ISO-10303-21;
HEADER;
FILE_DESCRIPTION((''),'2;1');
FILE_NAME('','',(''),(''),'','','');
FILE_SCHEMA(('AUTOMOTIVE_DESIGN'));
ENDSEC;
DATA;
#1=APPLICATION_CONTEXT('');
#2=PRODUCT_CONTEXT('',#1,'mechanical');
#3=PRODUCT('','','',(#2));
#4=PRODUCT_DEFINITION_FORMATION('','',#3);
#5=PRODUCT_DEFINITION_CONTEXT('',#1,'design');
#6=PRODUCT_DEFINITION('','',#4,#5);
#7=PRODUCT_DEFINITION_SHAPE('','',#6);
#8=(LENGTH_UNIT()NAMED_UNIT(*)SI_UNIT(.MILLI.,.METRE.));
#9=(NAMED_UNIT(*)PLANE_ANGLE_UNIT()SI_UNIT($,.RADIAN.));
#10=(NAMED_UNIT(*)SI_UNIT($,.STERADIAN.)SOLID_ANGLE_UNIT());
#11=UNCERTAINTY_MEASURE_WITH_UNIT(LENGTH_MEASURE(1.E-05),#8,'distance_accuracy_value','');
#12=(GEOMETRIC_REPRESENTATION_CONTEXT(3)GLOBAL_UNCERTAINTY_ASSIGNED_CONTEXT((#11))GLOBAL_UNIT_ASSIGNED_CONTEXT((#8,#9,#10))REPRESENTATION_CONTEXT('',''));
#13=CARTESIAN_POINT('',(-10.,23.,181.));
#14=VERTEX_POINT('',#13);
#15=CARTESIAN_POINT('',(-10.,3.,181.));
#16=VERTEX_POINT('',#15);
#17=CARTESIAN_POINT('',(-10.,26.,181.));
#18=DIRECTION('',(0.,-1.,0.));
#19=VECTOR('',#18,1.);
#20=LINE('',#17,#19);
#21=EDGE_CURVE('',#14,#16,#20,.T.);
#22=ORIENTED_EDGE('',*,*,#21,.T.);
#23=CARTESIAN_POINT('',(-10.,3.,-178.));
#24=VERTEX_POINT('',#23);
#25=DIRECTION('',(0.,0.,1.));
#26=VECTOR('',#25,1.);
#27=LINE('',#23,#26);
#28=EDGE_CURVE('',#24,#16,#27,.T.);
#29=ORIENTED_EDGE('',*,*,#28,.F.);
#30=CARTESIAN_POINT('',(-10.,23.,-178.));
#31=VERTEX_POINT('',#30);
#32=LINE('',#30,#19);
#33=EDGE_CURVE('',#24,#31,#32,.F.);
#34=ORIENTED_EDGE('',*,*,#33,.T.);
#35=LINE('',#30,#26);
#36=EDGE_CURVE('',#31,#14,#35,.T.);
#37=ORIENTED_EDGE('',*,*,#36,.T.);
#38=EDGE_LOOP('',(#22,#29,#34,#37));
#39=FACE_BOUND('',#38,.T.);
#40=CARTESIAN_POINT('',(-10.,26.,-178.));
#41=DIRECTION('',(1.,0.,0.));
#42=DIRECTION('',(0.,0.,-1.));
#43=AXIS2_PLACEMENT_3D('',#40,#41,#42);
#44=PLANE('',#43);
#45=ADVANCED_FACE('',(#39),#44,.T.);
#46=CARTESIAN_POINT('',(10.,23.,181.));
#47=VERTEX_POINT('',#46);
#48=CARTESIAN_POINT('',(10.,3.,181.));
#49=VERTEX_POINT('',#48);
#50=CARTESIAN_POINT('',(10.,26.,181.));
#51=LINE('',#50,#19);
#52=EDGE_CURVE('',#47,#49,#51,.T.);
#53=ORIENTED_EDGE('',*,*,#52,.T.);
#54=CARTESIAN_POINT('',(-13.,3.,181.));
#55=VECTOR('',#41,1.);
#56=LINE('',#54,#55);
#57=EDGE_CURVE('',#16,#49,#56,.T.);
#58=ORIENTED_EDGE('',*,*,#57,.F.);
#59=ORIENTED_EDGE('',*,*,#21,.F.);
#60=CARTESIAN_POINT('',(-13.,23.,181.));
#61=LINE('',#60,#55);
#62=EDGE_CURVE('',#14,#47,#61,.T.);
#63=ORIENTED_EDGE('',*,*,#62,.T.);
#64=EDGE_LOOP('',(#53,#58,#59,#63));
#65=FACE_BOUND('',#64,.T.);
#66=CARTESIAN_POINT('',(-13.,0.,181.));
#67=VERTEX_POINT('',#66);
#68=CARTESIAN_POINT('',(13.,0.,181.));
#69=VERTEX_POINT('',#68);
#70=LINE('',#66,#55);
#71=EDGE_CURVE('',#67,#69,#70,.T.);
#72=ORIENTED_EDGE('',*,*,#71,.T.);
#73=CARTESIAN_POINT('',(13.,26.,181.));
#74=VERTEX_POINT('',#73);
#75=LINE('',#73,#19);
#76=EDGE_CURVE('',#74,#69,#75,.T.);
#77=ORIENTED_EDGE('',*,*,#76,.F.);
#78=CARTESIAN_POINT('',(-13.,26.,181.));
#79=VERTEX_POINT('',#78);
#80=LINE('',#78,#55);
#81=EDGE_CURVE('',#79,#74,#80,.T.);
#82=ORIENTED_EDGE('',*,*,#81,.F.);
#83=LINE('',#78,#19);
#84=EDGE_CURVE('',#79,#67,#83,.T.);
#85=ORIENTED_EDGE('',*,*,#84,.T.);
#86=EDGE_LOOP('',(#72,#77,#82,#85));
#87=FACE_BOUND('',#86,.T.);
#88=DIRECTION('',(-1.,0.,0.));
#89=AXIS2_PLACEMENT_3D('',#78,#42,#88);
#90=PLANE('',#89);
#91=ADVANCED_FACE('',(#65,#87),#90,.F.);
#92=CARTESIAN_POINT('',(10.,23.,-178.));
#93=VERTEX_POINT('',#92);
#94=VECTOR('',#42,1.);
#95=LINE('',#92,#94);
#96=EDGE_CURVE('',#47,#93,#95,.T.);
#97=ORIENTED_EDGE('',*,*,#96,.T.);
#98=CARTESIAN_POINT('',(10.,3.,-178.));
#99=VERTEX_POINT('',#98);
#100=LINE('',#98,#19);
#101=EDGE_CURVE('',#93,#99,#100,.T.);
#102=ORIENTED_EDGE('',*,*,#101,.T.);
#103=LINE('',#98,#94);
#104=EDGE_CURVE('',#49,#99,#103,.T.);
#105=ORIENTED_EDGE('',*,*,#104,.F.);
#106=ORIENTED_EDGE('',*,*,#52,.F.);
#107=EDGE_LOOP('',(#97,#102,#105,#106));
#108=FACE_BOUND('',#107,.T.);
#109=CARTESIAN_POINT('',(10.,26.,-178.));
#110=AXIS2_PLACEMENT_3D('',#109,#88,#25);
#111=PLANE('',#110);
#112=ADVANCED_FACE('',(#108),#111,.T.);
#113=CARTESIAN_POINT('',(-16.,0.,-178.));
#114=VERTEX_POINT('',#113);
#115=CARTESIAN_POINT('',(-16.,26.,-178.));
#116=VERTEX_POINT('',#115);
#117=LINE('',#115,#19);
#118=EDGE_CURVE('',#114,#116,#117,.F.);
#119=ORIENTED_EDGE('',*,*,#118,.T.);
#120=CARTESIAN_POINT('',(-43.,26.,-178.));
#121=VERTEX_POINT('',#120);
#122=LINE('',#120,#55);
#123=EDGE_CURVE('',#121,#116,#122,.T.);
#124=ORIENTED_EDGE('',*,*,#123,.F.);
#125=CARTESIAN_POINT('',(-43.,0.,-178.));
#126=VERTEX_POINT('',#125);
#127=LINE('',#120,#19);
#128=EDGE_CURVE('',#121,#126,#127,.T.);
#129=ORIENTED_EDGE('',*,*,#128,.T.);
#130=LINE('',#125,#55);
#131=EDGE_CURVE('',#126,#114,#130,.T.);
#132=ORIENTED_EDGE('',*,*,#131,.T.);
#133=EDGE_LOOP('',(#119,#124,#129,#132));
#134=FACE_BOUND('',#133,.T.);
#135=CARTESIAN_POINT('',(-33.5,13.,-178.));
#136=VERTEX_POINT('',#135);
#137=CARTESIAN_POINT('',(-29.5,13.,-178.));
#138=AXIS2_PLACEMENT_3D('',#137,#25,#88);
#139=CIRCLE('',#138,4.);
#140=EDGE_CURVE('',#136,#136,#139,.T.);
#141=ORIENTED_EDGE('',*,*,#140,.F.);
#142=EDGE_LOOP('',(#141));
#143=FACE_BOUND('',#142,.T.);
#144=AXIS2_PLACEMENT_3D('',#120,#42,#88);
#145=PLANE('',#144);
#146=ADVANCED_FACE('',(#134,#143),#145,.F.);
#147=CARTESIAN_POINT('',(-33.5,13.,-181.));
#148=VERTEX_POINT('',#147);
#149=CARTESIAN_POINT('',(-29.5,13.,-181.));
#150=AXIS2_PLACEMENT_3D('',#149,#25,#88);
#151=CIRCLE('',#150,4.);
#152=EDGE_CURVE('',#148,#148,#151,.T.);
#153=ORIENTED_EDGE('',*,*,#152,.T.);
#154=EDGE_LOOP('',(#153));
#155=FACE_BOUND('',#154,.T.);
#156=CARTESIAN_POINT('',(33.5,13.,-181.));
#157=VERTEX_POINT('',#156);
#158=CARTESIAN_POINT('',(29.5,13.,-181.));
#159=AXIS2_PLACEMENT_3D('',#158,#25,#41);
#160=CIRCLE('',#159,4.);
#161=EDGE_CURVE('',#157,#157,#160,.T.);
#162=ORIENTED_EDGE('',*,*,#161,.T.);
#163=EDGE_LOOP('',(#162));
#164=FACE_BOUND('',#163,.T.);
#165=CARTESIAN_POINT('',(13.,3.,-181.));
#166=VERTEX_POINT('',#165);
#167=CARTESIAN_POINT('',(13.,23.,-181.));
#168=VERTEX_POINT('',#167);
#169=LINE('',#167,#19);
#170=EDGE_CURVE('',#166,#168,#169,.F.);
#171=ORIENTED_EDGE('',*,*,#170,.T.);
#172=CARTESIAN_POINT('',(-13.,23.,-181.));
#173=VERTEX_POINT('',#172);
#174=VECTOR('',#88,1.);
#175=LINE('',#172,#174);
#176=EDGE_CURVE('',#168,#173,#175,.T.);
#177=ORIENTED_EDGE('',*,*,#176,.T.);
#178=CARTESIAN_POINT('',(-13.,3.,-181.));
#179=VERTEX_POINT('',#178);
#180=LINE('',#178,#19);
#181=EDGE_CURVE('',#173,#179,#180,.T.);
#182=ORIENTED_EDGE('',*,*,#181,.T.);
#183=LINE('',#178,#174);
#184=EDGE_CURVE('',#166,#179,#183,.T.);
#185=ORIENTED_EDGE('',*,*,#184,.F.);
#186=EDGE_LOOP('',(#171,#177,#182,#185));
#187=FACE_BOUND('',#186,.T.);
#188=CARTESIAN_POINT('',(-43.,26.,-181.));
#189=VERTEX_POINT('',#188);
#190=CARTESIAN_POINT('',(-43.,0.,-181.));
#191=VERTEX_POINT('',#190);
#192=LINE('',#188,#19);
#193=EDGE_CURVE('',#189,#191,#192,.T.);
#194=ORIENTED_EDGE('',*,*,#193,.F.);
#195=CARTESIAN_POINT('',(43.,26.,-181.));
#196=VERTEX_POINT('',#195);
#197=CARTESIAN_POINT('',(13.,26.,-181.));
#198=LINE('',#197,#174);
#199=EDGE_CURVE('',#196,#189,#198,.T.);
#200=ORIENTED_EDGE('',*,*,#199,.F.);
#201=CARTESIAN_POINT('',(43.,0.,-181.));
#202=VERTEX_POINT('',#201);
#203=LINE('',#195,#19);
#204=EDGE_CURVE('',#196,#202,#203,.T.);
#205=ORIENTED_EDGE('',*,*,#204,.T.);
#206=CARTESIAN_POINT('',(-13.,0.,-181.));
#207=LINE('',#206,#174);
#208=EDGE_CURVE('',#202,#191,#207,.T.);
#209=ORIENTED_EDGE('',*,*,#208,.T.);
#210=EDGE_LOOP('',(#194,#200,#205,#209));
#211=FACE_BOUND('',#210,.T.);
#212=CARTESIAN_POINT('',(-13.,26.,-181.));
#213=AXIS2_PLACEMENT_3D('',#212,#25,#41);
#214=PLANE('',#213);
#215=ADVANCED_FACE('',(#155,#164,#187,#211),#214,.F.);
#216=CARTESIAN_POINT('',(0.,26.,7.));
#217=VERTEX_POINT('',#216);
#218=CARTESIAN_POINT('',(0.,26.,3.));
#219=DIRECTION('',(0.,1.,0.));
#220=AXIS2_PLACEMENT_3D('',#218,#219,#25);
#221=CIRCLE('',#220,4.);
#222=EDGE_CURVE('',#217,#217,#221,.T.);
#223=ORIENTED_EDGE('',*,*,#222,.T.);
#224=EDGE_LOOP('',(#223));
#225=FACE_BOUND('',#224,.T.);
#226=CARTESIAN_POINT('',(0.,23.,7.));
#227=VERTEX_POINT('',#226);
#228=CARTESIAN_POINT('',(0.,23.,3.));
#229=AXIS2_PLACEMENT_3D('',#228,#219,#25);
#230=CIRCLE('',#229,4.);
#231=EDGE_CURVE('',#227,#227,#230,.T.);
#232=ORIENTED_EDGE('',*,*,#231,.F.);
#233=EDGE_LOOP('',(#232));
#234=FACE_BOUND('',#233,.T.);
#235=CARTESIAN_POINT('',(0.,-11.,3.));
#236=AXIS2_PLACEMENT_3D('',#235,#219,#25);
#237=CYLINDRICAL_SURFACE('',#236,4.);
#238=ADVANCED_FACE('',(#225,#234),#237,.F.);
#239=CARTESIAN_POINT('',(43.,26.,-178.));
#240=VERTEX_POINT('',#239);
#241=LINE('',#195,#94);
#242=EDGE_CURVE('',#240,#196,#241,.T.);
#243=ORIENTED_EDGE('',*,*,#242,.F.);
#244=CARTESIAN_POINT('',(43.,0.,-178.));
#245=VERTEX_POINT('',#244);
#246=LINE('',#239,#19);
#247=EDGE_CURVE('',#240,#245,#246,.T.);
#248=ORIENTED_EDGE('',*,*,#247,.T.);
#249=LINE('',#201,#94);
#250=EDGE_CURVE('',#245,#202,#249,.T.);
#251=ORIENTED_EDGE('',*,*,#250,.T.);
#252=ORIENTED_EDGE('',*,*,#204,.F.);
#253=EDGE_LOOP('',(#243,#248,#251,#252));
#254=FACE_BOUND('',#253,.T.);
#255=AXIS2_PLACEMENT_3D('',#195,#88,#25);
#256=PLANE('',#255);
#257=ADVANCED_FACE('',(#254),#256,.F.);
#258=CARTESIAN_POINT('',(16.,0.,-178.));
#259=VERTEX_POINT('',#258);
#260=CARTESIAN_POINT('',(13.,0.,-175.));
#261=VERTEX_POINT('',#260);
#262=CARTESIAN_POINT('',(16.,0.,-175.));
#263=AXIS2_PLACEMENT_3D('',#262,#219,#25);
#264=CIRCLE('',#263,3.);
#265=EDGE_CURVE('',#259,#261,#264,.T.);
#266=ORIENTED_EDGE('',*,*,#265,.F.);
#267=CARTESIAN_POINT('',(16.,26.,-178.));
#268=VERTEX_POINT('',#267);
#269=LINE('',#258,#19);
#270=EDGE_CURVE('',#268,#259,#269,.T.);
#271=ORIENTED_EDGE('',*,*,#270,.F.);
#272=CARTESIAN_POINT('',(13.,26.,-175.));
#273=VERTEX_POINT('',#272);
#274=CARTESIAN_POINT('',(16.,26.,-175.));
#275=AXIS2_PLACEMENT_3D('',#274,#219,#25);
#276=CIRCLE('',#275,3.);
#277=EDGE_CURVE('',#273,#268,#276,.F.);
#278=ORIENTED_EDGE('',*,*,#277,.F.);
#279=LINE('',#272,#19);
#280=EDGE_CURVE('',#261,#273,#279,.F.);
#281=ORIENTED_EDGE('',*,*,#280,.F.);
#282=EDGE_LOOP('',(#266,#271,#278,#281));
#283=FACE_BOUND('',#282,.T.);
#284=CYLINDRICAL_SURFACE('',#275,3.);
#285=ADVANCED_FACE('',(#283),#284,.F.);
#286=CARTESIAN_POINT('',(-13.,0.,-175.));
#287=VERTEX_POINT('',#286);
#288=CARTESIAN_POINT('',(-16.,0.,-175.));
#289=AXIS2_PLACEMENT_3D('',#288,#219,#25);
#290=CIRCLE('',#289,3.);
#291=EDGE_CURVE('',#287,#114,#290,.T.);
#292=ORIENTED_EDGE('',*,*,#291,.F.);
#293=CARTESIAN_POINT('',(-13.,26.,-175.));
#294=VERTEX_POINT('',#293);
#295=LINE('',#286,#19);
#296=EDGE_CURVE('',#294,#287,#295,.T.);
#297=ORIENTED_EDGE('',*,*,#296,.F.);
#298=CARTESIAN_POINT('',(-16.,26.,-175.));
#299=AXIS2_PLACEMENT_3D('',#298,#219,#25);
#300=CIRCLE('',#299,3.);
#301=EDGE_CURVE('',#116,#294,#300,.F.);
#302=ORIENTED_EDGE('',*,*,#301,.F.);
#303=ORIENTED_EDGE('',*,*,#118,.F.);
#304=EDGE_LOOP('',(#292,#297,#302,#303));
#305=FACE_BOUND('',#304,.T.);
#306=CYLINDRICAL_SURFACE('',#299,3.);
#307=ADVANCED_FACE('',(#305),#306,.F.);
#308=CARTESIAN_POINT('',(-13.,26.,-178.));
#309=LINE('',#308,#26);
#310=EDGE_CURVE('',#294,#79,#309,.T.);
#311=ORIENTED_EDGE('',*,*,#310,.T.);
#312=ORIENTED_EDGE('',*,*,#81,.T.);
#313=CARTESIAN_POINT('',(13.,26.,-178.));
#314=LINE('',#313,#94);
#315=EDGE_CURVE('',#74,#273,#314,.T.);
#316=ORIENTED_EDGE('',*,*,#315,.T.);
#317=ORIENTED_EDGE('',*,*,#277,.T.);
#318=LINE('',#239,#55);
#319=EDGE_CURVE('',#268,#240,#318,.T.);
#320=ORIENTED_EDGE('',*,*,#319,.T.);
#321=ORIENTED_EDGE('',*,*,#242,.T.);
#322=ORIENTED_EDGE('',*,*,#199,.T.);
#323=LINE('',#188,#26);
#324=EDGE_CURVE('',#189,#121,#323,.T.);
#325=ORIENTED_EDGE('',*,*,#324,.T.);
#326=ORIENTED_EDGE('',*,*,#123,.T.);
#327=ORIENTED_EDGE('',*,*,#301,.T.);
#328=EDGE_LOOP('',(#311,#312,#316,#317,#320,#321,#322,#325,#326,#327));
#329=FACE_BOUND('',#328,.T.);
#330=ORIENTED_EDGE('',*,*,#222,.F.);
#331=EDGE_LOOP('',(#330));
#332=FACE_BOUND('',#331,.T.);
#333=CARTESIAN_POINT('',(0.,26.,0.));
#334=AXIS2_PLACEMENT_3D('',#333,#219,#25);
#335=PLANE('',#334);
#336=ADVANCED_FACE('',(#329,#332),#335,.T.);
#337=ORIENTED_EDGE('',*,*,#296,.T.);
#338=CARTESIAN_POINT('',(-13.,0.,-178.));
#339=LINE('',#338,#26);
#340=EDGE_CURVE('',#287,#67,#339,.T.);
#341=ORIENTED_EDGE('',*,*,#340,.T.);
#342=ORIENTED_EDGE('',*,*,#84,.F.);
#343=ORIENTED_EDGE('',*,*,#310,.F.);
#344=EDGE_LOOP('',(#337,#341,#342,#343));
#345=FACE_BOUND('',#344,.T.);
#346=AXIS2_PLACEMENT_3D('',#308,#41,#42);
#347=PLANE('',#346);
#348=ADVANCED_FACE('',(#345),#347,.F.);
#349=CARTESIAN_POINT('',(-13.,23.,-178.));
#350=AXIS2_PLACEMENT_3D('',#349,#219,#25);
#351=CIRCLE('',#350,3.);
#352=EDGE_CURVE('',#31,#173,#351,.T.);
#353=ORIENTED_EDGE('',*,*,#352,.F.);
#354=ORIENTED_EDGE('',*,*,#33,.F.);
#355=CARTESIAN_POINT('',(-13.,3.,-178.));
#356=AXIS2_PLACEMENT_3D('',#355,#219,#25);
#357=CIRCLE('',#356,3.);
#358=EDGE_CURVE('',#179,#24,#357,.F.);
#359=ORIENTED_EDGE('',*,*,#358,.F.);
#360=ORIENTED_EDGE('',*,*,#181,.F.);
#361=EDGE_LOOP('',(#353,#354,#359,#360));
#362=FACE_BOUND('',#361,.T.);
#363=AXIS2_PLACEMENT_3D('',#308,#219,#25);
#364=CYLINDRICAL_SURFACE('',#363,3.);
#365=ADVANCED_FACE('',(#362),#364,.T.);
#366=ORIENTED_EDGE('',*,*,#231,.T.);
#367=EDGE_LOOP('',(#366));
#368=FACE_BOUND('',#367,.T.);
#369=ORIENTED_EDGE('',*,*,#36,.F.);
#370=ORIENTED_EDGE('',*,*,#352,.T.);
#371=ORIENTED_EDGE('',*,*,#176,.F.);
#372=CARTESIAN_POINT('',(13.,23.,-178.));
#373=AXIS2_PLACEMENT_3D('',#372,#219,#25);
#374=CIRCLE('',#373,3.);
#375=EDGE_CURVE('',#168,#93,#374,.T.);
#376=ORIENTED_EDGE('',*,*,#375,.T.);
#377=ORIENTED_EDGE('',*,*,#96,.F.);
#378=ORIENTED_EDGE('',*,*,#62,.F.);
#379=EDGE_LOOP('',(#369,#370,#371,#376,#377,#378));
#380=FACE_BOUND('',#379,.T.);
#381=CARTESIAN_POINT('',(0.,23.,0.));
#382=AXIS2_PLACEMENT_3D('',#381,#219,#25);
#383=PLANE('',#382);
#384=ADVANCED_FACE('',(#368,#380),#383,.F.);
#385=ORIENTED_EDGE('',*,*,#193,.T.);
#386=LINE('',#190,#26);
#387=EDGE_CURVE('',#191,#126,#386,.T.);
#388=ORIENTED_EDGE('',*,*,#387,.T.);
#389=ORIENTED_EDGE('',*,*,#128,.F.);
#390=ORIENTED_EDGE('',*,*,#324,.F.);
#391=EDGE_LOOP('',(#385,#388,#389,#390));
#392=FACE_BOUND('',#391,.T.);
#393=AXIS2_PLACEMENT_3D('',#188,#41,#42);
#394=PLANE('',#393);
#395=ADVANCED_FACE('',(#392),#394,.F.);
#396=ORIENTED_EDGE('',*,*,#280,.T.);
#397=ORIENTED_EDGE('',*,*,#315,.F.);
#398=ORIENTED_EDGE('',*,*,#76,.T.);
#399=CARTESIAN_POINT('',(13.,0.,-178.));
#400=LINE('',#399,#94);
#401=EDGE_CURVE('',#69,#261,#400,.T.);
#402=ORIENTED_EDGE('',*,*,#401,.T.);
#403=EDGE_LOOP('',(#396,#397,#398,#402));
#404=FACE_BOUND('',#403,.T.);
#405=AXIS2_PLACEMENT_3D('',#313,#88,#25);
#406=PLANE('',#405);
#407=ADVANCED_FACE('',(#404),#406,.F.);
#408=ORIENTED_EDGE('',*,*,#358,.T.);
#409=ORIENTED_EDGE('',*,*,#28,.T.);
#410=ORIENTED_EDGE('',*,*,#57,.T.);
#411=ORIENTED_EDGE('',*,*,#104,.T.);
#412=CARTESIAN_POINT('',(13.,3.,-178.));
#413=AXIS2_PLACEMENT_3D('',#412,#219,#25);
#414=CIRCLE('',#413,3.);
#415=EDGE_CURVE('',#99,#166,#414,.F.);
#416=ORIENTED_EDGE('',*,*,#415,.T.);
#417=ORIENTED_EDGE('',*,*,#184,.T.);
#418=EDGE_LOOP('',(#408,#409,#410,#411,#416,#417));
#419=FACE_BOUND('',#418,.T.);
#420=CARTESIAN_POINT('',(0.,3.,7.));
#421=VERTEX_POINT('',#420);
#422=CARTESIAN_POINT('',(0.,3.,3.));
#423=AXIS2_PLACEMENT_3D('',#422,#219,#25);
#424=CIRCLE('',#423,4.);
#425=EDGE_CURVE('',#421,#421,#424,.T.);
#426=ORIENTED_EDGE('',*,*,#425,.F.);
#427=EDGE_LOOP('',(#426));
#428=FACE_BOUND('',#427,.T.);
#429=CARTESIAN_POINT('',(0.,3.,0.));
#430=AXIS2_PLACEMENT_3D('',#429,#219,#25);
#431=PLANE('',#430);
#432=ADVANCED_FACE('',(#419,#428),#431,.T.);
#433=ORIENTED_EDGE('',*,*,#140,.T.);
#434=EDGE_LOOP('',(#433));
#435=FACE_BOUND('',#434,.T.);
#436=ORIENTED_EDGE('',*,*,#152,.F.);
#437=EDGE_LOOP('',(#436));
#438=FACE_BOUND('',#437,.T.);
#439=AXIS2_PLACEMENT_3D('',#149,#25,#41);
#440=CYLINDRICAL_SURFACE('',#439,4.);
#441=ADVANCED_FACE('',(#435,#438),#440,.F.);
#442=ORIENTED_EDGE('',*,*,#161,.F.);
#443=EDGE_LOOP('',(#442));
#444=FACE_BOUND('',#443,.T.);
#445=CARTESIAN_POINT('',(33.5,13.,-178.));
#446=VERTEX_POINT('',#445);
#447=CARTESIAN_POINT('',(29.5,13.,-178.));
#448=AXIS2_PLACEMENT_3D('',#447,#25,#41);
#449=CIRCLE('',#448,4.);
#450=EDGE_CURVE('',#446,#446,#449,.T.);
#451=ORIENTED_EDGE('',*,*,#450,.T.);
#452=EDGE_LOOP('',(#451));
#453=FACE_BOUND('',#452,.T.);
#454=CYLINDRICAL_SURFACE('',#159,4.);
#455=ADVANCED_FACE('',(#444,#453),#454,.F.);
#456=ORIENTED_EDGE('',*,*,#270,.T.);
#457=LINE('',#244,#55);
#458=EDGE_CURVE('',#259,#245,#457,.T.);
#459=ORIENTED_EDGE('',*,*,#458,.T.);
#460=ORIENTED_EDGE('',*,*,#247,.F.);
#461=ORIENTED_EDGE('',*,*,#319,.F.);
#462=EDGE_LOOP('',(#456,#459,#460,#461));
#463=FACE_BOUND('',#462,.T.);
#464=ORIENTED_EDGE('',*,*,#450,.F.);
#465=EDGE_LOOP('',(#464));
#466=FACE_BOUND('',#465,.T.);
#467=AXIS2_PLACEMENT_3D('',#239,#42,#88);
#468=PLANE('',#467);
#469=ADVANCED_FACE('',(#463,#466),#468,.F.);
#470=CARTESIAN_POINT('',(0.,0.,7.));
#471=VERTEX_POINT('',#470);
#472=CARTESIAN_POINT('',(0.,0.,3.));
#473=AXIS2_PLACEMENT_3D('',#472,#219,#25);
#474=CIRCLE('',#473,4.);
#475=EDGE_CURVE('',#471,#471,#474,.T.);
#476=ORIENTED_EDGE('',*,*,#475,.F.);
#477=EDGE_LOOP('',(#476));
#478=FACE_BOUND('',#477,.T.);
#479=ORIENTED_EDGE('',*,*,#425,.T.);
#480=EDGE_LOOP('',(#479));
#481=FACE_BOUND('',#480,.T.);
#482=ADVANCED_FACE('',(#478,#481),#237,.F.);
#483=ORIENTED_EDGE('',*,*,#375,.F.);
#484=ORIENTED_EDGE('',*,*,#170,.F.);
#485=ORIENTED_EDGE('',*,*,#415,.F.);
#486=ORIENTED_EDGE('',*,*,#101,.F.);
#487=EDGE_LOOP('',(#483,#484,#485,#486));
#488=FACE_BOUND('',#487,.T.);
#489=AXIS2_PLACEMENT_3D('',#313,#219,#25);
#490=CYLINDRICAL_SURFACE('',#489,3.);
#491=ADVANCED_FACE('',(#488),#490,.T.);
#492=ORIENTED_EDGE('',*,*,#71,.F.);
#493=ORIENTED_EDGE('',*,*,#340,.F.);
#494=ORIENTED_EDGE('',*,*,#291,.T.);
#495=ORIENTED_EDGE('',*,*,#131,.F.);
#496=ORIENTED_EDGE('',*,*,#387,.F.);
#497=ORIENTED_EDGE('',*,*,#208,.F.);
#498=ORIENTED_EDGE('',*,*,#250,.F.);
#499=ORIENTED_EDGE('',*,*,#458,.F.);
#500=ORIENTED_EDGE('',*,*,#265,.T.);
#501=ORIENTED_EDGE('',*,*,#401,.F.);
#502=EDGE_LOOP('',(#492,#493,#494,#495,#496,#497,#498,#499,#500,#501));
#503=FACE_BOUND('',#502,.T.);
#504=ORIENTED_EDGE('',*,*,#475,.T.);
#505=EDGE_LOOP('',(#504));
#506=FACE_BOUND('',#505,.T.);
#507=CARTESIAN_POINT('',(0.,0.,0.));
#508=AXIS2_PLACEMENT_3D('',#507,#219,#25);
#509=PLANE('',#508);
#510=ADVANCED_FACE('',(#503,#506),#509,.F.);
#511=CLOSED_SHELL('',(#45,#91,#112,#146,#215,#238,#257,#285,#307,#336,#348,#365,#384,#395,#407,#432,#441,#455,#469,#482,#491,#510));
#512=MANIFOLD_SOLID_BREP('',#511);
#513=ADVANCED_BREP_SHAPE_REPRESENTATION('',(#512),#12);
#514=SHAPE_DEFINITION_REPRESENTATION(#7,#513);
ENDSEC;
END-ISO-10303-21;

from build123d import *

# Parameters (mm, degrees)
BOSS_EXTRUDE1_DEPTH = 26
SHELL1_START        = -10
SHELL1_OUTLINE_W    = 20
SHELL1_OUTLINE_H    = 362
SHELL1_DEPTH        = 20
FILLET1_R           = 3
SKETCH3_R           = 4
CUT_EXTRUDE1_DEPTH  = 3
SKETCH4_R           = 4
CUT_EXTRUDE2_DEPTH  = 37


# Read off the part's stored shape, not the designer's step: Shell1
with BuildPart() as part:
    # Sketch2 → Boss-Extrude1 (new body)
    with BuildSketch(Plane(origin=(0, 0, 0), x_dir=(1, 0, 0), z_dir=(0, 1, 0))):
        Polygon((-13, 181), (-43, 181), (-43, 178), (-13, 178), (-13, -181), (13, -181), (13, 178), (43, 178), (43, 181), (13, 181), align=None)
    extrude(amount=BOSS_EXTRUDE1_DEPTH)

    # Shell1 outline → Shell1 (cut)
    with BuildSketch(Plane.YZ.offset(SHELL1_START)):
        with Locations((13, 0)):
            Rectangle(SHELL1_OUTLINE_W, SHELL1_OUTLINE_H)
    extrude(amount=SHELL1_DEPTH, mode=Mode.SUBTRACT)

    # Fillet1
    fillet1_edges = [part.edges().sort_by_distance(p)[0] for p in [
        (-13, 13, -178),
        (13, 13, -178),
        (10, 13, -181),
        (-10, 13, -181),
    ]]
    fillet(fillet1_edges, radius=FILLET1_R)

    # Sketch3 → Cut-Extrude1 (cut)
    with BuildSketch(Plane.XY.offset(-178)):
        with Locations((29.5, 13)):
            Circle(SKETCH3_R)
        with Locations(Location((-29.5, 13, 0), (0, 0, 180))):
            Circle(SKETCH3_R)
    extrude(amount=-CUT_EXTRUDE1_DEPTH, mode=Mode.SUBTRACT)

    # Sketch4 → Cut-Extrude2 (cut)
    with BuildSketch(Plane(origin=(0, 26, 0), x_dir=(1, 0, 0), z_dir=(0, 1, 0))):
        with Locations(Location((0, -3, 0), (0, 0, 270))):
            Circle(SKETCH4_R)
    extrude(amount=-CUT_EXTRUDE2_DEPTH, mode=Mode.SUBTRACT)


solid = part.part
